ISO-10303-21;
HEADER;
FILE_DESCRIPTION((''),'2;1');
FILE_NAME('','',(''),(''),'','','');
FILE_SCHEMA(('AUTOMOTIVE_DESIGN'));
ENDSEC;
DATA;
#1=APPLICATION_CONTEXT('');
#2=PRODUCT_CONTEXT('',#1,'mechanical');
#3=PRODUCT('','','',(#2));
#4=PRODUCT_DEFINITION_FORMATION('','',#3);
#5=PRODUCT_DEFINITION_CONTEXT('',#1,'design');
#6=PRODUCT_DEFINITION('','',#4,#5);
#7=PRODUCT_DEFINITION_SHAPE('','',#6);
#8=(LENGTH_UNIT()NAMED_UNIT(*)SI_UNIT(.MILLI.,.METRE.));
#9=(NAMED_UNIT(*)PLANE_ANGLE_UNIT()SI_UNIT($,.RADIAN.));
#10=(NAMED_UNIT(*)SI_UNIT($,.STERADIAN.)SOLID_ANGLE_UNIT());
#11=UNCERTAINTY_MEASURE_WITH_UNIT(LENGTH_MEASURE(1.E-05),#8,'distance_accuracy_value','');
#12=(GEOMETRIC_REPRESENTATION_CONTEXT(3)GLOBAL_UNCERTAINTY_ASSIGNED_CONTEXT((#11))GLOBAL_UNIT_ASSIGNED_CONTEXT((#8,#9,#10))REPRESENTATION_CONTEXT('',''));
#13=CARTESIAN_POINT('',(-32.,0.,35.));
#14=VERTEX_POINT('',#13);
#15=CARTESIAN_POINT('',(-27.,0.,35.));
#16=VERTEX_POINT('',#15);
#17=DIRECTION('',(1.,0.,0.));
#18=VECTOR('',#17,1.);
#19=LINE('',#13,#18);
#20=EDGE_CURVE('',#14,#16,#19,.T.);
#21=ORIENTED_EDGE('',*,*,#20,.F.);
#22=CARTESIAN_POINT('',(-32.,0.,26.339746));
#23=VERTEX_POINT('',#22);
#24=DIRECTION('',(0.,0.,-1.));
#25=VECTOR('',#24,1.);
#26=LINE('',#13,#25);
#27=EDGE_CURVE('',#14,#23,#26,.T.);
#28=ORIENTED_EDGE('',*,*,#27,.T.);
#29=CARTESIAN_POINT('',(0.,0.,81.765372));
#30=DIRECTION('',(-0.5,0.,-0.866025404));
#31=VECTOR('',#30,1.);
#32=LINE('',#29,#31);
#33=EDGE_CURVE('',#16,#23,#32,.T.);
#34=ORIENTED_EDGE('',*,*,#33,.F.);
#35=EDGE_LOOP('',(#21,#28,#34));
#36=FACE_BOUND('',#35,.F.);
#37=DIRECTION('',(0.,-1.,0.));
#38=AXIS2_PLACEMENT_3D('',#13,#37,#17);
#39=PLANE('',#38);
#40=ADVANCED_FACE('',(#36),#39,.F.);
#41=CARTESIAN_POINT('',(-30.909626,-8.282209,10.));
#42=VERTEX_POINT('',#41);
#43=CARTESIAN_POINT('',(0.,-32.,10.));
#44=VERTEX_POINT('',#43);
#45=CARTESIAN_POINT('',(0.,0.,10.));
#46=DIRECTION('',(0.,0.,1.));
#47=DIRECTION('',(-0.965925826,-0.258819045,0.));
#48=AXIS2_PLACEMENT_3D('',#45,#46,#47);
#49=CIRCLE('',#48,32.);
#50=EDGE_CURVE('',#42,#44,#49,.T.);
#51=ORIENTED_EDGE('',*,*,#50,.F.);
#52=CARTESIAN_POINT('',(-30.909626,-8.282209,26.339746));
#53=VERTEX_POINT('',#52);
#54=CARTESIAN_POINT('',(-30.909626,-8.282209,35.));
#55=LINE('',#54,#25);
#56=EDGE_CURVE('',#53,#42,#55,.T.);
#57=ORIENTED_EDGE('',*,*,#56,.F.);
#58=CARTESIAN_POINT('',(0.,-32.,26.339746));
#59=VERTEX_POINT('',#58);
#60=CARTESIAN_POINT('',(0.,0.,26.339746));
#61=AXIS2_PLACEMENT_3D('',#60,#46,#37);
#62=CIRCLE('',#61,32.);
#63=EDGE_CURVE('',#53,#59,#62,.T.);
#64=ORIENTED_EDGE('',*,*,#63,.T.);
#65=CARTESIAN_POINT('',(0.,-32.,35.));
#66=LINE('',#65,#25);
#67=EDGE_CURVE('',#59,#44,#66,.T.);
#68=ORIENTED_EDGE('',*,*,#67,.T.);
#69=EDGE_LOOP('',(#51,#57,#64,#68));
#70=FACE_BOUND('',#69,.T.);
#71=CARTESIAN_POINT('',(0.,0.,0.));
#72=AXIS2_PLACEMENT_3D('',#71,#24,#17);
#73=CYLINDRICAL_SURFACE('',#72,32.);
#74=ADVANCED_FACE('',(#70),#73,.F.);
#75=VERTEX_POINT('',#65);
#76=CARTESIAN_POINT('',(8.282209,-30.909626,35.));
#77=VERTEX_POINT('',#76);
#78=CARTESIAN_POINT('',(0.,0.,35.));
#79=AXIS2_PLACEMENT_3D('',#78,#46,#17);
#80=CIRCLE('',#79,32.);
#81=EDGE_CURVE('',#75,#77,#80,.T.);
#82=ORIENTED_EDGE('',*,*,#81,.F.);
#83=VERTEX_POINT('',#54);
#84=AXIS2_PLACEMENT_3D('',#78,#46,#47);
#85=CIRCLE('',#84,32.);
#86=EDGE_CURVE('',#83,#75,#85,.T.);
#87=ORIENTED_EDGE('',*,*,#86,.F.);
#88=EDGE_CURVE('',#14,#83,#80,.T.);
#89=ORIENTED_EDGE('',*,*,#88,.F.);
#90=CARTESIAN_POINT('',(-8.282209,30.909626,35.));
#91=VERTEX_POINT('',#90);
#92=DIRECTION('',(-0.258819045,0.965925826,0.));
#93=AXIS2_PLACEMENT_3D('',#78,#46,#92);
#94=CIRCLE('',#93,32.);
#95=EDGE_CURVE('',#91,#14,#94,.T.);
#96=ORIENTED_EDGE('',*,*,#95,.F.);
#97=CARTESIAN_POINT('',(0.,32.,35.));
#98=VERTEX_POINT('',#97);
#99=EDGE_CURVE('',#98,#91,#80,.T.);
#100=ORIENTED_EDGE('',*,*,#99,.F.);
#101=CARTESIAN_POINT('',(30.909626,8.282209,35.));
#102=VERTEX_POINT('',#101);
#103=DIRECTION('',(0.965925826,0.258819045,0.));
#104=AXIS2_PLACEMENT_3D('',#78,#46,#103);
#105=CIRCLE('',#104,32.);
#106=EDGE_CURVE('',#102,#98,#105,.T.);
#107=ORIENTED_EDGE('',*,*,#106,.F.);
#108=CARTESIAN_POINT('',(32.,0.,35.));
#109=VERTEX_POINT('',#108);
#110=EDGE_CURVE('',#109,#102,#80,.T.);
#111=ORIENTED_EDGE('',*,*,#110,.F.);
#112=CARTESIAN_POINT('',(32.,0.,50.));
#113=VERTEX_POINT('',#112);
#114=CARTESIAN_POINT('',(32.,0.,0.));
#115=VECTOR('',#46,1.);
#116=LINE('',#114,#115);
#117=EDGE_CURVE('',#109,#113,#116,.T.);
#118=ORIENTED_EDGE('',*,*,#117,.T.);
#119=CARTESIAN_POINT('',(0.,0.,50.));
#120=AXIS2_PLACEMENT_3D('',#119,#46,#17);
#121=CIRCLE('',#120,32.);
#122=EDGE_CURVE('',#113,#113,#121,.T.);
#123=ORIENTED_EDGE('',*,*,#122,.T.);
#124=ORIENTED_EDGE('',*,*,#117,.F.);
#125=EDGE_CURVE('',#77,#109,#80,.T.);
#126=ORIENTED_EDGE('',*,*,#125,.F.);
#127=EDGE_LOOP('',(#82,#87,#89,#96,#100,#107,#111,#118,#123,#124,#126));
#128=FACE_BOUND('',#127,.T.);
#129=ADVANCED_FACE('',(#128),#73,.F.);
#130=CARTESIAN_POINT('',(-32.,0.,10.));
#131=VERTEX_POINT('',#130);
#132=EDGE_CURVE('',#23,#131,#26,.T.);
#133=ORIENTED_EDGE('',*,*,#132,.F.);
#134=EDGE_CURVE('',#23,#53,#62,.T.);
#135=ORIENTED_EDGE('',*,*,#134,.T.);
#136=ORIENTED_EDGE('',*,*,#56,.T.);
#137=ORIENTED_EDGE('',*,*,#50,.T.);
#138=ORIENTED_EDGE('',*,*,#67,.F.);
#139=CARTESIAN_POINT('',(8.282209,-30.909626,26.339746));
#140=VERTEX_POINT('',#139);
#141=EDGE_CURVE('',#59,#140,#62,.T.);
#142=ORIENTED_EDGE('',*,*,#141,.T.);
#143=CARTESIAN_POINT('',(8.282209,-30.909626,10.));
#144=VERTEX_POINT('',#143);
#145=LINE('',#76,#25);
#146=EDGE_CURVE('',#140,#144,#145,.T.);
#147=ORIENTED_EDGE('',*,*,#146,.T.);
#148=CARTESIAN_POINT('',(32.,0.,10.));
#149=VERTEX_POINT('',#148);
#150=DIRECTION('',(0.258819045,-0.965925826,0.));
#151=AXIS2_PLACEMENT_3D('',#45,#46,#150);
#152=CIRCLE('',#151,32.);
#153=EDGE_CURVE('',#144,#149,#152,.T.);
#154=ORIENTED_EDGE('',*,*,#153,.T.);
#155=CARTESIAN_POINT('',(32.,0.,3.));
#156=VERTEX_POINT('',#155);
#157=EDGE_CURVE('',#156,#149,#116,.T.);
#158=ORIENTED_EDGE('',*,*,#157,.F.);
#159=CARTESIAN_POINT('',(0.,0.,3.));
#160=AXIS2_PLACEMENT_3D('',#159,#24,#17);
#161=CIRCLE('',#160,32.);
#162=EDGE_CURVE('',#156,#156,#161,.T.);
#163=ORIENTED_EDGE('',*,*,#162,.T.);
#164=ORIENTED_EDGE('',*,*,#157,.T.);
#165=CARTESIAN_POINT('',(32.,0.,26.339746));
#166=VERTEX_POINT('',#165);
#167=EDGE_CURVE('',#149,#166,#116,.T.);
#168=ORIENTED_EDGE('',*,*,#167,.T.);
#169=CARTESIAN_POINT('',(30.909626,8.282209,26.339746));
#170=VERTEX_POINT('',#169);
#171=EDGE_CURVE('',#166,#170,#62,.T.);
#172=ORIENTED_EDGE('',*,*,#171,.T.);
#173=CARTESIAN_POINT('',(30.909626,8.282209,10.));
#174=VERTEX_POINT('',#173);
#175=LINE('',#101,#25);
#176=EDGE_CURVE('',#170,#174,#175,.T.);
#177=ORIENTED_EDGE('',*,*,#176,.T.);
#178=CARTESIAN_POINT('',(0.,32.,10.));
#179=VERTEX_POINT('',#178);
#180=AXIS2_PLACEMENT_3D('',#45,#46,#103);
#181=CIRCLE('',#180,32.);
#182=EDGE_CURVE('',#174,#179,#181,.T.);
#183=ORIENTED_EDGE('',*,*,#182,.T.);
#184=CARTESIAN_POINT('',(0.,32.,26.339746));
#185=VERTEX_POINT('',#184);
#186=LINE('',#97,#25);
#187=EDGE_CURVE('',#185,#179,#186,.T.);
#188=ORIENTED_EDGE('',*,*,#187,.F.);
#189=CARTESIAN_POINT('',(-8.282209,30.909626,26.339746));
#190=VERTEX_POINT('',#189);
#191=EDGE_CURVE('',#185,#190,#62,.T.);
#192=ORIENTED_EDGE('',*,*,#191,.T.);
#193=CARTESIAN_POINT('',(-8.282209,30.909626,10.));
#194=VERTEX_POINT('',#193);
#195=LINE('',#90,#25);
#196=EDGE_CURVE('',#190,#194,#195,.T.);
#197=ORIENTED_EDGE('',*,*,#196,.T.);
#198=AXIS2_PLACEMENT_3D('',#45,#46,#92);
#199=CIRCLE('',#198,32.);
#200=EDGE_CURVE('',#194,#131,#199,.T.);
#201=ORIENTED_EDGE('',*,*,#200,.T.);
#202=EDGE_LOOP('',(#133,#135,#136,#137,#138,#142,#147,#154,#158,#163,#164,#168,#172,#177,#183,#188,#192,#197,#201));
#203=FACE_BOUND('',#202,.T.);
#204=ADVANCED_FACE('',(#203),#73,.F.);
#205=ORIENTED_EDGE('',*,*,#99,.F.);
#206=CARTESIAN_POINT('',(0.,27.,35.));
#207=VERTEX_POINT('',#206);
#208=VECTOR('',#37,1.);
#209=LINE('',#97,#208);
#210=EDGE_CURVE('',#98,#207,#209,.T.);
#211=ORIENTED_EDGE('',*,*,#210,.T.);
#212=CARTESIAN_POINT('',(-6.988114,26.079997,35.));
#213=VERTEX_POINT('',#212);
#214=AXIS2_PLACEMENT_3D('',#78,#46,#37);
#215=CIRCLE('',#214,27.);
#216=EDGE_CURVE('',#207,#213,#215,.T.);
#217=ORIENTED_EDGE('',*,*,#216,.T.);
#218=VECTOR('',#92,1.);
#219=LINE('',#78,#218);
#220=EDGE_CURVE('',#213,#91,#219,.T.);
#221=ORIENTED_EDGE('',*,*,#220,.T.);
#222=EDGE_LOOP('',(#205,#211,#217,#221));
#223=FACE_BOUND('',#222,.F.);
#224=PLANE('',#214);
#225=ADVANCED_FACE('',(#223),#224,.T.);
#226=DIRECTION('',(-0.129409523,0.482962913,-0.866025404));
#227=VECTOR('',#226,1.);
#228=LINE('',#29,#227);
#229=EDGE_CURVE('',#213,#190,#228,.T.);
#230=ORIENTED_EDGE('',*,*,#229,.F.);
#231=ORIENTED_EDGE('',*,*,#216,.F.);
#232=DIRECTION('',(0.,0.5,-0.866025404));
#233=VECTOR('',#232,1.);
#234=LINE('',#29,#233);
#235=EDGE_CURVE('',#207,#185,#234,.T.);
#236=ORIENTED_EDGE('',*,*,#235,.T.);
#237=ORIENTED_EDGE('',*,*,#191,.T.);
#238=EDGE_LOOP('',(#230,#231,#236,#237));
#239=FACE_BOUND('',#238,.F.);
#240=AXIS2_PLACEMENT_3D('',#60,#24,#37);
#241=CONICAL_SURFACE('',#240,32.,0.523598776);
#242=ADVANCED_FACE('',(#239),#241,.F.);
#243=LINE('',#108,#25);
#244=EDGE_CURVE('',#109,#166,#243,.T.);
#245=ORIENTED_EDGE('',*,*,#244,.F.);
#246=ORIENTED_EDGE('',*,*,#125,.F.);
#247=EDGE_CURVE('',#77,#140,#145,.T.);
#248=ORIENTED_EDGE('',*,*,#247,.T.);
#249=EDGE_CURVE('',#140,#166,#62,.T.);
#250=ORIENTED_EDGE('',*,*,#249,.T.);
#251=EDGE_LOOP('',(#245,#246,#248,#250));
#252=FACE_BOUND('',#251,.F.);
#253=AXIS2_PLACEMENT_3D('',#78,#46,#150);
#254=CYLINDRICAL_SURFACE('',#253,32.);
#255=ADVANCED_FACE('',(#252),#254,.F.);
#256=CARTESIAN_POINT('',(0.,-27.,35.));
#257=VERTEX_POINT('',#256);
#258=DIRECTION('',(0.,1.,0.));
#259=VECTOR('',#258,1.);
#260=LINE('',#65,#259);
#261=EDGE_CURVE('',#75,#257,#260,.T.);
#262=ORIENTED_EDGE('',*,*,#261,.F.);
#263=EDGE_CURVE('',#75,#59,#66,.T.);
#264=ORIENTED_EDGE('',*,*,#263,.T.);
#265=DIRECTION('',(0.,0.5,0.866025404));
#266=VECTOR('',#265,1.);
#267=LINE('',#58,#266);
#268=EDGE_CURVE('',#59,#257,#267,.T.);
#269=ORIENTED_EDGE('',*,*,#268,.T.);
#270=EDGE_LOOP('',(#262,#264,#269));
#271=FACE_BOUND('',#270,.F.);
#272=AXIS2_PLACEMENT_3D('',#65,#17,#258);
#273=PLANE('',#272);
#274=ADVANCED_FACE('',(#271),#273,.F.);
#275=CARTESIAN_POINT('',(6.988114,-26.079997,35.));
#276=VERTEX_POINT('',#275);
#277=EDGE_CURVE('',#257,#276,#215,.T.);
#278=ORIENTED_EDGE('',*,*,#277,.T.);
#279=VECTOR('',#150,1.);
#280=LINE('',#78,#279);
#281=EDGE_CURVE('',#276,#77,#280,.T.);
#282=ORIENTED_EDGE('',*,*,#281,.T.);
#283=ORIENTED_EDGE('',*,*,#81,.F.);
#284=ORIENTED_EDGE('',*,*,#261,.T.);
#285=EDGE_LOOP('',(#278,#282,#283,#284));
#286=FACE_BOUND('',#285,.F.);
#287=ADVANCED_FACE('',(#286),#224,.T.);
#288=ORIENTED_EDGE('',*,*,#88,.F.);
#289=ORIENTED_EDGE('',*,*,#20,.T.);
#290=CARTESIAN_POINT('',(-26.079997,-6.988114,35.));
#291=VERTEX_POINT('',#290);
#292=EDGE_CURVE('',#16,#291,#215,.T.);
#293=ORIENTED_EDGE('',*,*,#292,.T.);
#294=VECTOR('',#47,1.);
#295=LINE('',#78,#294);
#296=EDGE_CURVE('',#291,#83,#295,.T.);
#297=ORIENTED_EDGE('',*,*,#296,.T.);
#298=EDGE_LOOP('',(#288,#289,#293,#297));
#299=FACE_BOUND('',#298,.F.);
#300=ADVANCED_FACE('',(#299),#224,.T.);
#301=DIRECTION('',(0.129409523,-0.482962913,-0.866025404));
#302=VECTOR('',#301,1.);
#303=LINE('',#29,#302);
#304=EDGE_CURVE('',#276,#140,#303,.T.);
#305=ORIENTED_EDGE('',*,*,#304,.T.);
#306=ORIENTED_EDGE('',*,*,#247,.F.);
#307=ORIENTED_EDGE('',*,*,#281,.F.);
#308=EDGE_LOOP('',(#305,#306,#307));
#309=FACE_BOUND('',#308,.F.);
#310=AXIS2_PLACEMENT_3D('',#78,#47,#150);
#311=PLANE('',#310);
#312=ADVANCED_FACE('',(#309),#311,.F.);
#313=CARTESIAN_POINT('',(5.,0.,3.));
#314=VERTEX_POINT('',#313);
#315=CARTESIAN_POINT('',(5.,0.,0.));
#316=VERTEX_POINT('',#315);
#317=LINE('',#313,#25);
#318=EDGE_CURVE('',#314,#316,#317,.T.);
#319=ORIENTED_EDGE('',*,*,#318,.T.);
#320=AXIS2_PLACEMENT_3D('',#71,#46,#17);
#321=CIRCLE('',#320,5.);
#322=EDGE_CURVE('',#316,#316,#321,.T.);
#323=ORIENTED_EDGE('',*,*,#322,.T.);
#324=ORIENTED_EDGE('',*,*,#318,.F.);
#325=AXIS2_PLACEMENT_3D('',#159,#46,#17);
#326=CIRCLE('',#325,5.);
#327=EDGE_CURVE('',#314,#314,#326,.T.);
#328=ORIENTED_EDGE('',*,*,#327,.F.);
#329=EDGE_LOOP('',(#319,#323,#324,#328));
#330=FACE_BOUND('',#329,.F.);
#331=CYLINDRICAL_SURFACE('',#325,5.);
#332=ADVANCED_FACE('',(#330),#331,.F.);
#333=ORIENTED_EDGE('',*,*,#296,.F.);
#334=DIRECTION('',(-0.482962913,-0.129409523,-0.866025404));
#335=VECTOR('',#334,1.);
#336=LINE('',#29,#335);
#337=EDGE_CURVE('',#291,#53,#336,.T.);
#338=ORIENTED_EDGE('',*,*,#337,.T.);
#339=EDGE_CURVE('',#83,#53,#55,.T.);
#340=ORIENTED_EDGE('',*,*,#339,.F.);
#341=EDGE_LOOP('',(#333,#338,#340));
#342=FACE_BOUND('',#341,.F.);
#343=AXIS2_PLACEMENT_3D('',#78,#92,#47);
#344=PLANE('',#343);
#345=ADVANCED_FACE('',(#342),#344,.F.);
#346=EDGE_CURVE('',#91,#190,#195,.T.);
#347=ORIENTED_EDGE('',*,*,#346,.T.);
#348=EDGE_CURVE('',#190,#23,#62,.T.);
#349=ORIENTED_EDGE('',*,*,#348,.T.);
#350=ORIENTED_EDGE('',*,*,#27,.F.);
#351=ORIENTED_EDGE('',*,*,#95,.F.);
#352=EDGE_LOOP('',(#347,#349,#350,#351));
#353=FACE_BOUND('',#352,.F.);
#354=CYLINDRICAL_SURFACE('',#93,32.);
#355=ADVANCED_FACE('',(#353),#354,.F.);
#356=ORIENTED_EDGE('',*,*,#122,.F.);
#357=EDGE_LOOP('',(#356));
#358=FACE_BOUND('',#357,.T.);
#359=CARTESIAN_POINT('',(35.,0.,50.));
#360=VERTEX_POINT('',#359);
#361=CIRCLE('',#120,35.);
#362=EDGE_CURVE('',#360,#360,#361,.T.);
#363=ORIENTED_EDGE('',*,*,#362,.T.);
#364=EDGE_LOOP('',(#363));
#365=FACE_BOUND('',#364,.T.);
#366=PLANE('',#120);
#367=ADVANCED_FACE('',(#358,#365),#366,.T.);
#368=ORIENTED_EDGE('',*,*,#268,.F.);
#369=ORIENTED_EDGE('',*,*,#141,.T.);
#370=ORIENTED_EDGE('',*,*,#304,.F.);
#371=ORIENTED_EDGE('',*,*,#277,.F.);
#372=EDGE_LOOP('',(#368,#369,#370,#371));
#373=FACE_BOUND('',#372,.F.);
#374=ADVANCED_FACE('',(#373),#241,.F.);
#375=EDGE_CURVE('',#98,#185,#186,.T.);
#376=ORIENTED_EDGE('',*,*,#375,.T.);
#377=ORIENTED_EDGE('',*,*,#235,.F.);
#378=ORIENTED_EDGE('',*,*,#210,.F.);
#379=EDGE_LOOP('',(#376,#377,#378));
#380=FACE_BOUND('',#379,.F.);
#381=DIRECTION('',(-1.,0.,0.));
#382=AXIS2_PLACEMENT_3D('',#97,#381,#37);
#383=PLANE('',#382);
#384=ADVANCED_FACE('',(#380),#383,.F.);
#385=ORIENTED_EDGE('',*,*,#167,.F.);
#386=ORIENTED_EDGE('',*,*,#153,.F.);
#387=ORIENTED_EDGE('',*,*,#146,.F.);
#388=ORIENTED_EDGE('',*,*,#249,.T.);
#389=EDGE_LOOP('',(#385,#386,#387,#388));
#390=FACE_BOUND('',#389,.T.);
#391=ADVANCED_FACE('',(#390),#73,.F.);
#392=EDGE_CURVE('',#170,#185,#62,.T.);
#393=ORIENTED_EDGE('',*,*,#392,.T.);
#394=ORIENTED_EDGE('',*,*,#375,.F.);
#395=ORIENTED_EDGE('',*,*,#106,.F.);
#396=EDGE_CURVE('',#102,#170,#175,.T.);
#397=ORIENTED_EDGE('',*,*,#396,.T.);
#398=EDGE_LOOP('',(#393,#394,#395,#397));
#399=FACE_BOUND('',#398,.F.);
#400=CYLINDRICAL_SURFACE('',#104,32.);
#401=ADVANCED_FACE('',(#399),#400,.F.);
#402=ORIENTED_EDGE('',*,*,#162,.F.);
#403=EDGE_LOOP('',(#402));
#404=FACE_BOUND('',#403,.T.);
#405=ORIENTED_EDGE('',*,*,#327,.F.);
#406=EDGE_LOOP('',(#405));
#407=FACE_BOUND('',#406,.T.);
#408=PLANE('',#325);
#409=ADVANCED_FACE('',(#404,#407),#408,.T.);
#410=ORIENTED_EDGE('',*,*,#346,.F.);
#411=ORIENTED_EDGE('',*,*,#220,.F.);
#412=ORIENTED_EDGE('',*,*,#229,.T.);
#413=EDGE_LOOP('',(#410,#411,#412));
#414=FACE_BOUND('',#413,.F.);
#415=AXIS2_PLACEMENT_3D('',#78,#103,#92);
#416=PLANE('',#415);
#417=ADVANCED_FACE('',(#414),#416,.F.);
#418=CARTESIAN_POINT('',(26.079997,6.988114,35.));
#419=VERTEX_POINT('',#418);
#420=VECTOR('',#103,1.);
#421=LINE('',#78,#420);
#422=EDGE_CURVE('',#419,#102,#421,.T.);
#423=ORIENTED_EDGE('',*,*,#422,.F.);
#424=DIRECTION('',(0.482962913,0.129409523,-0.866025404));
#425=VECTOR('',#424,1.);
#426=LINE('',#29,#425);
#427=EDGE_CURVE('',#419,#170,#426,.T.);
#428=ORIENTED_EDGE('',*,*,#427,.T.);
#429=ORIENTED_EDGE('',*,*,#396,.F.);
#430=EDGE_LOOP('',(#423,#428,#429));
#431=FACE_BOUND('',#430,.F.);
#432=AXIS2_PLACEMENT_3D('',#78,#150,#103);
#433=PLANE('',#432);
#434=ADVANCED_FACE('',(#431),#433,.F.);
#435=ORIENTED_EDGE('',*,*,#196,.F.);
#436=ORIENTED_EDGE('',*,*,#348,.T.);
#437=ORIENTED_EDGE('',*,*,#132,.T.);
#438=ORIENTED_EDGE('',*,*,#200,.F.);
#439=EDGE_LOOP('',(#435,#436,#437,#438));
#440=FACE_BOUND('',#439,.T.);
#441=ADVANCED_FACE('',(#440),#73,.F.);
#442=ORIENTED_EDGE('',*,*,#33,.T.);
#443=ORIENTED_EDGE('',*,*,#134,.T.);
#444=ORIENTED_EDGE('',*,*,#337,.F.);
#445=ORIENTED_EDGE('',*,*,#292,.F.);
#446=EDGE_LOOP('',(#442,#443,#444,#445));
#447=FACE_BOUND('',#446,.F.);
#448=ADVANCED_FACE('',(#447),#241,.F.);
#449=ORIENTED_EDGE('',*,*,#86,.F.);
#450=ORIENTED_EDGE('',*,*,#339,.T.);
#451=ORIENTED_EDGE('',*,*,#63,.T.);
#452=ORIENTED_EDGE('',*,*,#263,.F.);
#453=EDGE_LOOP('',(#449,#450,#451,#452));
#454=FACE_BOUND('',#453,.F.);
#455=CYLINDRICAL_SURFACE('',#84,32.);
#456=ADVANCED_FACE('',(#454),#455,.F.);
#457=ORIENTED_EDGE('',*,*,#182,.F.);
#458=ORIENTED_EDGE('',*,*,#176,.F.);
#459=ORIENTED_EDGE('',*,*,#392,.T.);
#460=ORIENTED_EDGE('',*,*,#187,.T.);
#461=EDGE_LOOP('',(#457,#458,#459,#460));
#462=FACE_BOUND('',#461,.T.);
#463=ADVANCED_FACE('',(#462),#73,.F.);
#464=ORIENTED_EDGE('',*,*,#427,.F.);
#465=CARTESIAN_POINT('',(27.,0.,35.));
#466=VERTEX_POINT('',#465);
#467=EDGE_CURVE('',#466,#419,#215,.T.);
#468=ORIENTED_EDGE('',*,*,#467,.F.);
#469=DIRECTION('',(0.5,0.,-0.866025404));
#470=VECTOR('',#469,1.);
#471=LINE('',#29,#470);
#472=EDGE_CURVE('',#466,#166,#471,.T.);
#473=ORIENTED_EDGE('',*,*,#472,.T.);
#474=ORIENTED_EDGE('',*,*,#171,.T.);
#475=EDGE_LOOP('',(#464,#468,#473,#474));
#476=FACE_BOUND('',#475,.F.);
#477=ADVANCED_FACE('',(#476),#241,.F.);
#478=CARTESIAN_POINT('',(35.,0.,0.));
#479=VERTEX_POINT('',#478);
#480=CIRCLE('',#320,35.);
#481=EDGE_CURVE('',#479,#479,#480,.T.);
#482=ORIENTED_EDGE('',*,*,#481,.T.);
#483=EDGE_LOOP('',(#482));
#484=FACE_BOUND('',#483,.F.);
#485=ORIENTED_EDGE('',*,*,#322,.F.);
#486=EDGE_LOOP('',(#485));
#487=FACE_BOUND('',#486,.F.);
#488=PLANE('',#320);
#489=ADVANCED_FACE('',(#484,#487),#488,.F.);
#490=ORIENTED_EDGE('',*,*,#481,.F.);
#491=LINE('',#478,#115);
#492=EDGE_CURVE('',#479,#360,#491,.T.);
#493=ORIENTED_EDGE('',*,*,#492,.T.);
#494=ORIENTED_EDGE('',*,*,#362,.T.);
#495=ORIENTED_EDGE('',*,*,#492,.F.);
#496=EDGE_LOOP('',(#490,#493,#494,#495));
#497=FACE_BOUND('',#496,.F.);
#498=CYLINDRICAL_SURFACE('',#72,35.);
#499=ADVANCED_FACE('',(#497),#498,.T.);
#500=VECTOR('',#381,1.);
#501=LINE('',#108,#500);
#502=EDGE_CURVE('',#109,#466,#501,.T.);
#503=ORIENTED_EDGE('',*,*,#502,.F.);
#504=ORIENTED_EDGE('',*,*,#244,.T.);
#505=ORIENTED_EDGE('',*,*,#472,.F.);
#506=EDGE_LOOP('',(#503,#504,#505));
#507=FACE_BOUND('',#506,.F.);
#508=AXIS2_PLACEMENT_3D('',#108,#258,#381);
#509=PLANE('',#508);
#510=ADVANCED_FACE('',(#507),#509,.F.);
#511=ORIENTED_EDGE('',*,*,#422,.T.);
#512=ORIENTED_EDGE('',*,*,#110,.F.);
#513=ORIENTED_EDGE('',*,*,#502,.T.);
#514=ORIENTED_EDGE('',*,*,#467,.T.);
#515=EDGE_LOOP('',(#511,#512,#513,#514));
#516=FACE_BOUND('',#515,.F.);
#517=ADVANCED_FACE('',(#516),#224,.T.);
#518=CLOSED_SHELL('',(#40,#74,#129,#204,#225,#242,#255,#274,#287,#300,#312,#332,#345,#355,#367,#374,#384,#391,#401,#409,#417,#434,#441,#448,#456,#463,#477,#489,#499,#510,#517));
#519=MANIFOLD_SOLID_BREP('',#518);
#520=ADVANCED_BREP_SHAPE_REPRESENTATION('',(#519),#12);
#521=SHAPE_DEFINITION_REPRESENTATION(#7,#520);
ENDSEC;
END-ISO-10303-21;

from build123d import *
from build123d import SkipClean  # not in build123d's __all__

# Parameters (mm, degrees)
F0_R     = 35
F1_DEPTH = 50
F2_T     = -3
F6_DEPTH = 25
F7_R     = 5
F8_DEPTH = 25


# Not quite as in the source:
# - after a boolean that leaves OpenCascade's solid faulty, fix() repairs it


with BuildPart() as f1:
    # F0 (on Top) → F1 (new body)
    with BuildSketch(Plane.XY):
        Circle(F0_R)
    extrude(amount=F1_DEPTH)

    # F2
    f2_openings = [f1.faces().sort_by_distance(p)[0] for p in [
        (0, 0, 50),
    ]]
    offset(amount=F2_T, openings=f2_openings)

    # F3 (on Right) → F4 (revolve)
    with BuildSketch(Plane.YZ):
        Polygon((-27, 35), (-32, 35), (-32, 26.3397459622), align=None)
    revolve(axis=Axis((0, 0, 50.3253415227), (0, 0, 1)))

    # F5 (on face) → F6 (cut)
    with BuildSketch(Plane.XY.offset(35)):
        with BuildLine():
            ThreePointArc((-8.2822094433, 30.9096264413), (-25.3873068893, 19.4803657283), (-32, 0))
            Line((-32, 0), (0, 0))
            Line((0, 0), (-8.2822094433, 30.9096264413))
        make_face()
        with BuildLine():
            Line((0, 32), (0, 0))
            Line((0, 0), (30.9096264413, 8.2822094433))
            ThreePointArc((30.9096264413, 8.2822094433), (19.4803657283, 25.3873068893), (0, 32))
        make_face()
        with BuildLine():
            Line((32, 0), (0, 0))
            Line((0, 0), (8.2822094433, -30.9096264413))
            ThreePointArc((8.2822094433, -30.9096264413), (25.3873068893, -19.4803657283), (32, 0))
        make_face()
        with BuildLine():
            Line((0, -32), (0, 0))
            Line((0, 0), (-30.9096264413, -8.2822094433))
            ThreePointArc((-30.9096264413, -8.2822094433), (-19.4803657283, -25.3873068893), (0, -32))
        make_face()
    with SkipClean():  # cleaning this boolean's faces spoils the solid; the shape is the same uncleaned
        extrude(amount=-F6_DEPTH, mode=Mode.SUBTRACT)

    # F7 (on face) → F8 (cut)
    with BuildSketch(Plane.XY.offset(3)):
        Circle(F7_R)
    extrude(amount=-F8_DEPTH, mode=Mode.SUBTRACT)

    add(f1.part.fix(), mode=Mode.REPLACE)


solid = f1.part
